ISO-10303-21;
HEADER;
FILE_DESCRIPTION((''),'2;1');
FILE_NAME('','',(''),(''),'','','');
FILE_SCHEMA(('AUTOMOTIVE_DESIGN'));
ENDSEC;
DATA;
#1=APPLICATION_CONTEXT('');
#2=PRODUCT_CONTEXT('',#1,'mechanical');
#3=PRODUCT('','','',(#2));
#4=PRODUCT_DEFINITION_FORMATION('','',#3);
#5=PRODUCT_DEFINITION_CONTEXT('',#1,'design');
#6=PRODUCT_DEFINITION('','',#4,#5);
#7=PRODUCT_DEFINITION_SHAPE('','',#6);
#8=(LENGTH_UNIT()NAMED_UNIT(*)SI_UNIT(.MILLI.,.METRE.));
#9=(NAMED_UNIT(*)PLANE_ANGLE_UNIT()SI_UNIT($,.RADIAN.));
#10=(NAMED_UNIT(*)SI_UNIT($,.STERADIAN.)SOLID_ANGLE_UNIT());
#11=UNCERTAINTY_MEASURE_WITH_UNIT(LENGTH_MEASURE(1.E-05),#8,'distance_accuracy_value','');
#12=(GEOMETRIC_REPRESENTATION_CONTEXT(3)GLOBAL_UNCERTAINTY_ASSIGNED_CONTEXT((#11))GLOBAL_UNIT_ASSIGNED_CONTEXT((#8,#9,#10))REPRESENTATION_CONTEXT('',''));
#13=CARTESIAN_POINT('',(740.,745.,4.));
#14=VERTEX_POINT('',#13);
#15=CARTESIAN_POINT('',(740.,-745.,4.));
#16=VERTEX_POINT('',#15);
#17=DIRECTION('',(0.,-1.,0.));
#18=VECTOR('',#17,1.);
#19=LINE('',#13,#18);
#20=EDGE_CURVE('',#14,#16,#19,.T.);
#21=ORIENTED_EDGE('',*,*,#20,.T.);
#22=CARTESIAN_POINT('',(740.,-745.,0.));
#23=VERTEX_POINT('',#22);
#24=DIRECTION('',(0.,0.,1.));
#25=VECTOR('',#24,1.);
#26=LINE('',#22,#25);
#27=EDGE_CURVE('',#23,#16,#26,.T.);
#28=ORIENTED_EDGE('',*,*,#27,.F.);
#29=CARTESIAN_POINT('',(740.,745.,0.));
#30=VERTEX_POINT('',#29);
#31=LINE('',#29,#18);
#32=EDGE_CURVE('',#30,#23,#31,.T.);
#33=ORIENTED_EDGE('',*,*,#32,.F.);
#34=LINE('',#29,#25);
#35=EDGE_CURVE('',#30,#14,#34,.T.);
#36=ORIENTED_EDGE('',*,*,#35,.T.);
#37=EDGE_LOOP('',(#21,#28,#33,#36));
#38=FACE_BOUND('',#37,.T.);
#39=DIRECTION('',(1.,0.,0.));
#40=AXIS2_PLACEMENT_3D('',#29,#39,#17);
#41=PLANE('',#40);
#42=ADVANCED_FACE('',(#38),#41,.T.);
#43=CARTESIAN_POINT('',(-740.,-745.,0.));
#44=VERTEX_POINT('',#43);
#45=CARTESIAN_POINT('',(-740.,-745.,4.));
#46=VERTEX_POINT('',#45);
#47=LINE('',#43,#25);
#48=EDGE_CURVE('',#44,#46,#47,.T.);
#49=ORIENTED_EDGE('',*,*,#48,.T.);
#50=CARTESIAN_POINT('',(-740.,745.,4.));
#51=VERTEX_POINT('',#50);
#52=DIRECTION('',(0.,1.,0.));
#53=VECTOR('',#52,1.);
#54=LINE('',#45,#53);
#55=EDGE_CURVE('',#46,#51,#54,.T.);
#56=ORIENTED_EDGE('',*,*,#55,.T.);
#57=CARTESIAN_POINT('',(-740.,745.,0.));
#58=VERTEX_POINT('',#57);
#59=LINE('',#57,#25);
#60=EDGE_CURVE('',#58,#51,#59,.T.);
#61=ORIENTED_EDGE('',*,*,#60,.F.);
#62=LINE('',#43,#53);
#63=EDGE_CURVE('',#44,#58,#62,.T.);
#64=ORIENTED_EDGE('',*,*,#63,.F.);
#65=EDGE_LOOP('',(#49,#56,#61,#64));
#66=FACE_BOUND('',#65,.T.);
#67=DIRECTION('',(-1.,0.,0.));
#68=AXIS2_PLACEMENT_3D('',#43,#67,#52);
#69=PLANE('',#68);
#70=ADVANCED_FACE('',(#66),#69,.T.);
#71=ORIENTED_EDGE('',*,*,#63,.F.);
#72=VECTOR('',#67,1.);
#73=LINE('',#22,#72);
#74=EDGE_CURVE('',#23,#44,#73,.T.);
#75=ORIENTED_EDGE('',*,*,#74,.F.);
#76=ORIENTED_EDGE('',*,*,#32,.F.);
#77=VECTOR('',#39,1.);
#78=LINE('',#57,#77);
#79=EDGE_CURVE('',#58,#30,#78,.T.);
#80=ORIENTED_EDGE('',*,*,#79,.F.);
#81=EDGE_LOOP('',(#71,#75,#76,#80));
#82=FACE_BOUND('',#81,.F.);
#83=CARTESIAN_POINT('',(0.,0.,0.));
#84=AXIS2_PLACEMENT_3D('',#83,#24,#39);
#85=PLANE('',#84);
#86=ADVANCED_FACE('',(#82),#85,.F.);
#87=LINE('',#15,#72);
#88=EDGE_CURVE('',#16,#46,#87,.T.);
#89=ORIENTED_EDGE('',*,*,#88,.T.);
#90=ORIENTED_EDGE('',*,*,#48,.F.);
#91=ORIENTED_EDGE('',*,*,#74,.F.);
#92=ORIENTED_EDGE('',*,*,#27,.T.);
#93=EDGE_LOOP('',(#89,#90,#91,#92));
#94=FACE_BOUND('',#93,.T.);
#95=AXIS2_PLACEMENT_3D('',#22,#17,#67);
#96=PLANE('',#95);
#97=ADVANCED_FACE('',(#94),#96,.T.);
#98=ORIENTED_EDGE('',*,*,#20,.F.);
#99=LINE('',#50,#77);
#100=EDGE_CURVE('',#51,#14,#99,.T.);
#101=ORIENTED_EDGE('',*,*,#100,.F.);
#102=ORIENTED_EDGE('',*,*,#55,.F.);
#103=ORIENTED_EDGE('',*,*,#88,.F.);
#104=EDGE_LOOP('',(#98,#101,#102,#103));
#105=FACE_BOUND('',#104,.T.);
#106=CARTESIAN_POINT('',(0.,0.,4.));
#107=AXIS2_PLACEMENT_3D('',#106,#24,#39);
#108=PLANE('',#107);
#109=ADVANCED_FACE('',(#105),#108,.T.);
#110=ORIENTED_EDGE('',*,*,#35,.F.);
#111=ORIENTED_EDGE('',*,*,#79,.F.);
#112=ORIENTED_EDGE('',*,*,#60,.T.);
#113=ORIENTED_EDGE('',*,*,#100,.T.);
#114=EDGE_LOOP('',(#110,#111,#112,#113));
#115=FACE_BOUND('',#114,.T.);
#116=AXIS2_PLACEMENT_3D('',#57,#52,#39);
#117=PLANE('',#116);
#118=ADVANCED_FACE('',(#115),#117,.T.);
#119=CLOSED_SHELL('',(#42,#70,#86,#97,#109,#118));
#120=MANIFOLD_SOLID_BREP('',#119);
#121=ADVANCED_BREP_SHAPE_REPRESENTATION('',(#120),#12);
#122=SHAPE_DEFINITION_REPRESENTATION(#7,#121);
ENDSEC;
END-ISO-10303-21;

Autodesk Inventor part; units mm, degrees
ref_plane "YZ Plane" through (0, 0, 0) normal (1, 0, 0) x (0, 1, 0)
ref_plane "XZ Plane" through (0, 0, 0) normal (0, 1, 0) x (-1, 0, 0)
ref_plane "XY Plane" through (0, 0, 0) normal (0, 0, 1) x (1, 0, 0)
sketch "Sketch1" plane through (0, 0, 0) normal (0, 0, 1) x (1, 0, 0)
  line L0 (740, -745) -> (-740, -745)
  line L1 (-740, -745) -> (-740, 745)
  line L2 (-740, 745) -> (740, 745)
  line L3 (740, 745) -> (740, -745)
  line L4 (740, -745) -> (-740, 745) construction
  line L5 (-740, -745) -> (740, 745) construction
  point P0 (0, 0)
  dimension "d0" = 1480
  dimension "d1" = 1490
extrude "Plate1" add sketch "Sketch1" along normal blind 4
sketch "Sketch2" plane through (0, 0, 0) normal (0, 0, -1) x (-1, 0, 0)
  line L0 (525.2603, -544.1907) -> (525.2603, -1005.879) construction
  line L1 (525.2603, -1005.879) -> (495.2603, -1005.879) construction
  line L2 (495.2603, -1005.879) -> (495.2603, -544.1907) construction
  line L3 (495.2603, -544.1907) -> (525.2603, -544.1907) construction
  line L4 (210.5058, -493) -> (210.5058, -590) projected
  line L5 (210.5058, -590) -> (206.5068, -590) projected
  line L6 (-289.6228, -493) -> (-289.6228, -590) projected
  line L7 (-289.6228, -590) -> (-293.6218, -590) projected
  ellipse E0 centre (-289.6228, 745) end of major axis (-289.6228, 775) minor radius 0.6803 (-289.6228, 715) -> (-289.6228, 775) ccw projected
  line L8 (-289.6228, 715) -> (-293.6218, 715) projected
  ellipse E1 centre (210.5058, 745) end of major axis (210.5058, 775) minor radius 0.6803 (210.5058, 715) -> (210.5058, 775) ccw projected
  line L9 (210.5058, 715) -> (206.5068, 715) projected
  line L10 (-739.3197, -489.5) -> (-710, -489.5) projected
  line L11 (-710, -489.5) -> (-710, -485.5) projected
  line L12 (-739.3197, 7.1667) -> (-710, 7.1667) projected
  line L13 (-710, 7.1667) -> (-710, 11.1667) projected
  line L14 (-739.3197, 503.8333) -> (-710, 503.8333) projected
  line L15 (-710, 503.8333) -> (-710, 507.8333) projected
  line L16 (710, -489.5) -> (710, -485.5) construction
  line L17 (710, 7.1667) -> (710, 11.1667) projected
  line L18 (710, 503.8333) -> (710, 507.8333) projected
  line L19 (710, -489.5) -> (710, -485.5) projected
  line L20 (710, 503.8333) -> (680, 503.8333)
  line L21 (710, 7.1667) -> (680, 7.1667)
  line L22 (710, -489.5) -> (680, -489.5)
  point P0 (0, 0)
  dimension "d6" = 30
  dimension "d7" = 30
  dimension "d8" = 30
mark "Mark1"
equation "\"d0\" = Лист_ширина"
equation "\"d2\" = Thickness"
equation "\"BendRadius\" = Thickness"
equation "\"BendReliefWidth\" = Thickness"
equation "\"BendReliefDepth\" = 0.5 * Thickness"
equation "\"CornerReliefSize\" = 4 * Thickness"
equation "\"MinimumRemnant\" = 2 * Thickness"
equation "\"TransitionRadius\" = BendRadius"
equation "\"JacobiRadiusSize\" = BendRadius"
equation "\"GapSize\" = Thickness"
equation "\"Лист_ширина\" = 1480"
equation "\"Thickness\" = 4"
properties part number "CH 1318 GBK shield" material "Steel"
